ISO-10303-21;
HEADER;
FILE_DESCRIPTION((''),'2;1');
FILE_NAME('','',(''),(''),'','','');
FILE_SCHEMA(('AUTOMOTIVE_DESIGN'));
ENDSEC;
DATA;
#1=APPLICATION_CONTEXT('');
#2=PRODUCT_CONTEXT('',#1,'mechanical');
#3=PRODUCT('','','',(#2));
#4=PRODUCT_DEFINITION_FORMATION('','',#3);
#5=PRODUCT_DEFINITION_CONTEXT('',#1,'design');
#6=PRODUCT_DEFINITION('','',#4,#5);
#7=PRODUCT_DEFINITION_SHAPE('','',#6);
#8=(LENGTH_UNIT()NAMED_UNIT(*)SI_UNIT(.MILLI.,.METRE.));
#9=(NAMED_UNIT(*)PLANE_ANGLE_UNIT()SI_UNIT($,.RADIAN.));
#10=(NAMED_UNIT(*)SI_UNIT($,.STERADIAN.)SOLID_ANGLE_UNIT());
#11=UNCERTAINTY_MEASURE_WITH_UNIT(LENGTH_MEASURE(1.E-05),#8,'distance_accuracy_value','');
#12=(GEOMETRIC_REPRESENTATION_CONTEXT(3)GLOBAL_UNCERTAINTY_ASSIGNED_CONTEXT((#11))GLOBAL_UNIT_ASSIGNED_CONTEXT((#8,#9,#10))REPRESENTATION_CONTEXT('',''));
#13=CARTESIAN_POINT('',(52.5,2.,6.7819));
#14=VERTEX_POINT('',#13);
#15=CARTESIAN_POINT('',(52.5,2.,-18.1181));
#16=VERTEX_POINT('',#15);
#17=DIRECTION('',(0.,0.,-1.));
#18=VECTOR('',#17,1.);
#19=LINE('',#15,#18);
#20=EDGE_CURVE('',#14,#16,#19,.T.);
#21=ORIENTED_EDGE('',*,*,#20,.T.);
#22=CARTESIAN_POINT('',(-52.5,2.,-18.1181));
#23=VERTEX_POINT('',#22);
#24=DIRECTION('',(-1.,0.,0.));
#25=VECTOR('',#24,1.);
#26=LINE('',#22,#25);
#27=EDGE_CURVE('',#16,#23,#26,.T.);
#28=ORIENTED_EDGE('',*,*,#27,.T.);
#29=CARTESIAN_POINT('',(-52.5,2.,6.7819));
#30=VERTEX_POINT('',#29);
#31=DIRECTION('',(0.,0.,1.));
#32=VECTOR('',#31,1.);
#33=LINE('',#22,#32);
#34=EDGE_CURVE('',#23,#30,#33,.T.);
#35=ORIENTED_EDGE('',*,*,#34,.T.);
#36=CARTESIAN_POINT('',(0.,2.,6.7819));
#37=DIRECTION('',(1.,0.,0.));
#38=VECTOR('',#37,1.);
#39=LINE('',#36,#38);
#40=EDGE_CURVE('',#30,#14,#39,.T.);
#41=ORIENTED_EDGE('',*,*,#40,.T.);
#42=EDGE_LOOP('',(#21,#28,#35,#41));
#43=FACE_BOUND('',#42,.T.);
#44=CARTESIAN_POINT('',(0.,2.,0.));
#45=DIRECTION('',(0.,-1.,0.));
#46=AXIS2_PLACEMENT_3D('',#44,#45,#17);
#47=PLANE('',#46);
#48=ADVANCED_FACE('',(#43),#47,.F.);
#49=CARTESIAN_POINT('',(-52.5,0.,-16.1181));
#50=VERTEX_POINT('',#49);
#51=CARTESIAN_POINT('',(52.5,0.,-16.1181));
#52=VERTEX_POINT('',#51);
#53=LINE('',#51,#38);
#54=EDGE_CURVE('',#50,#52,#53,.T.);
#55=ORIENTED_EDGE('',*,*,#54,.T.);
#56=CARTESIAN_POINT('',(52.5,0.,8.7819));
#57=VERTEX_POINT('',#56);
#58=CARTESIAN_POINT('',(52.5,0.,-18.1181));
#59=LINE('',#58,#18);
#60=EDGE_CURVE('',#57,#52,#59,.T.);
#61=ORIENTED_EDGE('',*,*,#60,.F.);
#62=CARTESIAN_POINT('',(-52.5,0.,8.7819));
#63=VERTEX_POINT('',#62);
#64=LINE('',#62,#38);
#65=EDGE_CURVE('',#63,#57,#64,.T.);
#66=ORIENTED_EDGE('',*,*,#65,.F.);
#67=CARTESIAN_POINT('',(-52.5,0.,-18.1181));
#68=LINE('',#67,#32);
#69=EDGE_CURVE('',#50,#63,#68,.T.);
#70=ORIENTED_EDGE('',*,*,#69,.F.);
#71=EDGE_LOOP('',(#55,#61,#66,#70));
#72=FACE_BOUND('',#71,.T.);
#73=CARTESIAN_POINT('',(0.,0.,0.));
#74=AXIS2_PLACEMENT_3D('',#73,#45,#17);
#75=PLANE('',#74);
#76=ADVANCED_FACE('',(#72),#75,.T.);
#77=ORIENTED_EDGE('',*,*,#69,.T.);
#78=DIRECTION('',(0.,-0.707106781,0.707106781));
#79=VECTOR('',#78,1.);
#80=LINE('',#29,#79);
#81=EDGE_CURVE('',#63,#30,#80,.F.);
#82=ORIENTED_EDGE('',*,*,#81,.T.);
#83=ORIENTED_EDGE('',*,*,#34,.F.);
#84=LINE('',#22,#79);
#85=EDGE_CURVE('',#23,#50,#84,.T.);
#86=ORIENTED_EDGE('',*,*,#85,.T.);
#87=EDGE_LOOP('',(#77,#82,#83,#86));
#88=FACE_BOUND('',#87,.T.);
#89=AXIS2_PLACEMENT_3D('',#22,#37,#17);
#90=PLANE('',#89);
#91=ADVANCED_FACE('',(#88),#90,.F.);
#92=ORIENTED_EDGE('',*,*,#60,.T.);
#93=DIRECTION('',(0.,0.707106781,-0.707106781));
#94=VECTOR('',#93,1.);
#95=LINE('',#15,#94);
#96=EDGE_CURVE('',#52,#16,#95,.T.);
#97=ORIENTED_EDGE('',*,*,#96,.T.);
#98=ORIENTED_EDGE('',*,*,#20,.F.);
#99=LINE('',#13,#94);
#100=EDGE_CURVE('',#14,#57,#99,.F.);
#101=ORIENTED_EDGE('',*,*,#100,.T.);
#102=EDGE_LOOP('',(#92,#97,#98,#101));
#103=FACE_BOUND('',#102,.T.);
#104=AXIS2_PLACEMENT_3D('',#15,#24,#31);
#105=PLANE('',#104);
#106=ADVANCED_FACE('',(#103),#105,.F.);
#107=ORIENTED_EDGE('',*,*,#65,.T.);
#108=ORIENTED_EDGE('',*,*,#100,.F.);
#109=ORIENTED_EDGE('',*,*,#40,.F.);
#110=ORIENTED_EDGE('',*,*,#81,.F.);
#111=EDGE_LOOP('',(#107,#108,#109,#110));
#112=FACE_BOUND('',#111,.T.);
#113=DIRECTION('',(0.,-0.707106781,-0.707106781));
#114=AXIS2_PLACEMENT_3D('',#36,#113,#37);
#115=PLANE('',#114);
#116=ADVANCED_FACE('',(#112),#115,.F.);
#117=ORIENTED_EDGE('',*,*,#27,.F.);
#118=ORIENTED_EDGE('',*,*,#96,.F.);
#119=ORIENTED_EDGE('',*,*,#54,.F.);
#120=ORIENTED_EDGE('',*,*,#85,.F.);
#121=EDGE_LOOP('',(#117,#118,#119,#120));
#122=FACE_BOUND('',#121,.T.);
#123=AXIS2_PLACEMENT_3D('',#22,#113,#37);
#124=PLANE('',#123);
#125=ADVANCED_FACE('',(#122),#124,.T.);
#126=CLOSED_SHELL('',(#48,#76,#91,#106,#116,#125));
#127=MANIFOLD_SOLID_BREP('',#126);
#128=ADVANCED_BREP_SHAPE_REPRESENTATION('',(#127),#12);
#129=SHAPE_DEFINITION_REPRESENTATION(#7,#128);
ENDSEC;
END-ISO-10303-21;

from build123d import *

# Parameters (mm, degrees)
SKETCH2_W           = 105
SKETCH2_H           = 26.9
BOSS_EXTRUDE1_DEPTH = 2
CHAMFER1_SIZE       = 2
CHAMFER2_SIZE       = 2


with BuildPart() as part:
    # Sketch2 → Boss-Extrude1 (new body)
    with BuildSketch(Plane(origin=(0, 0, 0), x_dir=(1, 0, 0), z_dir=(0, 1, 0))):
        with Locations((0, 4.668100445)):
            Rectangle(SKETCH2_W, SKETCH2_H)
    extrude(amount=BOSS_EXTRUDE1_DEPTH)

    # Chamfer1
    chamfer1_edges = [part.edges().sort_by_distance(p)[0] for p in [
        (0, 2, 8.781899555),
    ]]
    chamfer(chamfer1_edges, length=CHAMFER1_SIZE - 0.0001)  # a hair under: the kernel refuses the full size

    # Chamfer2
    chamfer2_edges = [part.edges().sort_by_distance(p)[0] for p in [
        (0, 0, -18.118100445),
    ]]
    chamfer(chamfer2_edges, length=CHAMFER2_SIZE - 0.0001)  # a hair under: the kernel refuses the full size


solid = part.part
